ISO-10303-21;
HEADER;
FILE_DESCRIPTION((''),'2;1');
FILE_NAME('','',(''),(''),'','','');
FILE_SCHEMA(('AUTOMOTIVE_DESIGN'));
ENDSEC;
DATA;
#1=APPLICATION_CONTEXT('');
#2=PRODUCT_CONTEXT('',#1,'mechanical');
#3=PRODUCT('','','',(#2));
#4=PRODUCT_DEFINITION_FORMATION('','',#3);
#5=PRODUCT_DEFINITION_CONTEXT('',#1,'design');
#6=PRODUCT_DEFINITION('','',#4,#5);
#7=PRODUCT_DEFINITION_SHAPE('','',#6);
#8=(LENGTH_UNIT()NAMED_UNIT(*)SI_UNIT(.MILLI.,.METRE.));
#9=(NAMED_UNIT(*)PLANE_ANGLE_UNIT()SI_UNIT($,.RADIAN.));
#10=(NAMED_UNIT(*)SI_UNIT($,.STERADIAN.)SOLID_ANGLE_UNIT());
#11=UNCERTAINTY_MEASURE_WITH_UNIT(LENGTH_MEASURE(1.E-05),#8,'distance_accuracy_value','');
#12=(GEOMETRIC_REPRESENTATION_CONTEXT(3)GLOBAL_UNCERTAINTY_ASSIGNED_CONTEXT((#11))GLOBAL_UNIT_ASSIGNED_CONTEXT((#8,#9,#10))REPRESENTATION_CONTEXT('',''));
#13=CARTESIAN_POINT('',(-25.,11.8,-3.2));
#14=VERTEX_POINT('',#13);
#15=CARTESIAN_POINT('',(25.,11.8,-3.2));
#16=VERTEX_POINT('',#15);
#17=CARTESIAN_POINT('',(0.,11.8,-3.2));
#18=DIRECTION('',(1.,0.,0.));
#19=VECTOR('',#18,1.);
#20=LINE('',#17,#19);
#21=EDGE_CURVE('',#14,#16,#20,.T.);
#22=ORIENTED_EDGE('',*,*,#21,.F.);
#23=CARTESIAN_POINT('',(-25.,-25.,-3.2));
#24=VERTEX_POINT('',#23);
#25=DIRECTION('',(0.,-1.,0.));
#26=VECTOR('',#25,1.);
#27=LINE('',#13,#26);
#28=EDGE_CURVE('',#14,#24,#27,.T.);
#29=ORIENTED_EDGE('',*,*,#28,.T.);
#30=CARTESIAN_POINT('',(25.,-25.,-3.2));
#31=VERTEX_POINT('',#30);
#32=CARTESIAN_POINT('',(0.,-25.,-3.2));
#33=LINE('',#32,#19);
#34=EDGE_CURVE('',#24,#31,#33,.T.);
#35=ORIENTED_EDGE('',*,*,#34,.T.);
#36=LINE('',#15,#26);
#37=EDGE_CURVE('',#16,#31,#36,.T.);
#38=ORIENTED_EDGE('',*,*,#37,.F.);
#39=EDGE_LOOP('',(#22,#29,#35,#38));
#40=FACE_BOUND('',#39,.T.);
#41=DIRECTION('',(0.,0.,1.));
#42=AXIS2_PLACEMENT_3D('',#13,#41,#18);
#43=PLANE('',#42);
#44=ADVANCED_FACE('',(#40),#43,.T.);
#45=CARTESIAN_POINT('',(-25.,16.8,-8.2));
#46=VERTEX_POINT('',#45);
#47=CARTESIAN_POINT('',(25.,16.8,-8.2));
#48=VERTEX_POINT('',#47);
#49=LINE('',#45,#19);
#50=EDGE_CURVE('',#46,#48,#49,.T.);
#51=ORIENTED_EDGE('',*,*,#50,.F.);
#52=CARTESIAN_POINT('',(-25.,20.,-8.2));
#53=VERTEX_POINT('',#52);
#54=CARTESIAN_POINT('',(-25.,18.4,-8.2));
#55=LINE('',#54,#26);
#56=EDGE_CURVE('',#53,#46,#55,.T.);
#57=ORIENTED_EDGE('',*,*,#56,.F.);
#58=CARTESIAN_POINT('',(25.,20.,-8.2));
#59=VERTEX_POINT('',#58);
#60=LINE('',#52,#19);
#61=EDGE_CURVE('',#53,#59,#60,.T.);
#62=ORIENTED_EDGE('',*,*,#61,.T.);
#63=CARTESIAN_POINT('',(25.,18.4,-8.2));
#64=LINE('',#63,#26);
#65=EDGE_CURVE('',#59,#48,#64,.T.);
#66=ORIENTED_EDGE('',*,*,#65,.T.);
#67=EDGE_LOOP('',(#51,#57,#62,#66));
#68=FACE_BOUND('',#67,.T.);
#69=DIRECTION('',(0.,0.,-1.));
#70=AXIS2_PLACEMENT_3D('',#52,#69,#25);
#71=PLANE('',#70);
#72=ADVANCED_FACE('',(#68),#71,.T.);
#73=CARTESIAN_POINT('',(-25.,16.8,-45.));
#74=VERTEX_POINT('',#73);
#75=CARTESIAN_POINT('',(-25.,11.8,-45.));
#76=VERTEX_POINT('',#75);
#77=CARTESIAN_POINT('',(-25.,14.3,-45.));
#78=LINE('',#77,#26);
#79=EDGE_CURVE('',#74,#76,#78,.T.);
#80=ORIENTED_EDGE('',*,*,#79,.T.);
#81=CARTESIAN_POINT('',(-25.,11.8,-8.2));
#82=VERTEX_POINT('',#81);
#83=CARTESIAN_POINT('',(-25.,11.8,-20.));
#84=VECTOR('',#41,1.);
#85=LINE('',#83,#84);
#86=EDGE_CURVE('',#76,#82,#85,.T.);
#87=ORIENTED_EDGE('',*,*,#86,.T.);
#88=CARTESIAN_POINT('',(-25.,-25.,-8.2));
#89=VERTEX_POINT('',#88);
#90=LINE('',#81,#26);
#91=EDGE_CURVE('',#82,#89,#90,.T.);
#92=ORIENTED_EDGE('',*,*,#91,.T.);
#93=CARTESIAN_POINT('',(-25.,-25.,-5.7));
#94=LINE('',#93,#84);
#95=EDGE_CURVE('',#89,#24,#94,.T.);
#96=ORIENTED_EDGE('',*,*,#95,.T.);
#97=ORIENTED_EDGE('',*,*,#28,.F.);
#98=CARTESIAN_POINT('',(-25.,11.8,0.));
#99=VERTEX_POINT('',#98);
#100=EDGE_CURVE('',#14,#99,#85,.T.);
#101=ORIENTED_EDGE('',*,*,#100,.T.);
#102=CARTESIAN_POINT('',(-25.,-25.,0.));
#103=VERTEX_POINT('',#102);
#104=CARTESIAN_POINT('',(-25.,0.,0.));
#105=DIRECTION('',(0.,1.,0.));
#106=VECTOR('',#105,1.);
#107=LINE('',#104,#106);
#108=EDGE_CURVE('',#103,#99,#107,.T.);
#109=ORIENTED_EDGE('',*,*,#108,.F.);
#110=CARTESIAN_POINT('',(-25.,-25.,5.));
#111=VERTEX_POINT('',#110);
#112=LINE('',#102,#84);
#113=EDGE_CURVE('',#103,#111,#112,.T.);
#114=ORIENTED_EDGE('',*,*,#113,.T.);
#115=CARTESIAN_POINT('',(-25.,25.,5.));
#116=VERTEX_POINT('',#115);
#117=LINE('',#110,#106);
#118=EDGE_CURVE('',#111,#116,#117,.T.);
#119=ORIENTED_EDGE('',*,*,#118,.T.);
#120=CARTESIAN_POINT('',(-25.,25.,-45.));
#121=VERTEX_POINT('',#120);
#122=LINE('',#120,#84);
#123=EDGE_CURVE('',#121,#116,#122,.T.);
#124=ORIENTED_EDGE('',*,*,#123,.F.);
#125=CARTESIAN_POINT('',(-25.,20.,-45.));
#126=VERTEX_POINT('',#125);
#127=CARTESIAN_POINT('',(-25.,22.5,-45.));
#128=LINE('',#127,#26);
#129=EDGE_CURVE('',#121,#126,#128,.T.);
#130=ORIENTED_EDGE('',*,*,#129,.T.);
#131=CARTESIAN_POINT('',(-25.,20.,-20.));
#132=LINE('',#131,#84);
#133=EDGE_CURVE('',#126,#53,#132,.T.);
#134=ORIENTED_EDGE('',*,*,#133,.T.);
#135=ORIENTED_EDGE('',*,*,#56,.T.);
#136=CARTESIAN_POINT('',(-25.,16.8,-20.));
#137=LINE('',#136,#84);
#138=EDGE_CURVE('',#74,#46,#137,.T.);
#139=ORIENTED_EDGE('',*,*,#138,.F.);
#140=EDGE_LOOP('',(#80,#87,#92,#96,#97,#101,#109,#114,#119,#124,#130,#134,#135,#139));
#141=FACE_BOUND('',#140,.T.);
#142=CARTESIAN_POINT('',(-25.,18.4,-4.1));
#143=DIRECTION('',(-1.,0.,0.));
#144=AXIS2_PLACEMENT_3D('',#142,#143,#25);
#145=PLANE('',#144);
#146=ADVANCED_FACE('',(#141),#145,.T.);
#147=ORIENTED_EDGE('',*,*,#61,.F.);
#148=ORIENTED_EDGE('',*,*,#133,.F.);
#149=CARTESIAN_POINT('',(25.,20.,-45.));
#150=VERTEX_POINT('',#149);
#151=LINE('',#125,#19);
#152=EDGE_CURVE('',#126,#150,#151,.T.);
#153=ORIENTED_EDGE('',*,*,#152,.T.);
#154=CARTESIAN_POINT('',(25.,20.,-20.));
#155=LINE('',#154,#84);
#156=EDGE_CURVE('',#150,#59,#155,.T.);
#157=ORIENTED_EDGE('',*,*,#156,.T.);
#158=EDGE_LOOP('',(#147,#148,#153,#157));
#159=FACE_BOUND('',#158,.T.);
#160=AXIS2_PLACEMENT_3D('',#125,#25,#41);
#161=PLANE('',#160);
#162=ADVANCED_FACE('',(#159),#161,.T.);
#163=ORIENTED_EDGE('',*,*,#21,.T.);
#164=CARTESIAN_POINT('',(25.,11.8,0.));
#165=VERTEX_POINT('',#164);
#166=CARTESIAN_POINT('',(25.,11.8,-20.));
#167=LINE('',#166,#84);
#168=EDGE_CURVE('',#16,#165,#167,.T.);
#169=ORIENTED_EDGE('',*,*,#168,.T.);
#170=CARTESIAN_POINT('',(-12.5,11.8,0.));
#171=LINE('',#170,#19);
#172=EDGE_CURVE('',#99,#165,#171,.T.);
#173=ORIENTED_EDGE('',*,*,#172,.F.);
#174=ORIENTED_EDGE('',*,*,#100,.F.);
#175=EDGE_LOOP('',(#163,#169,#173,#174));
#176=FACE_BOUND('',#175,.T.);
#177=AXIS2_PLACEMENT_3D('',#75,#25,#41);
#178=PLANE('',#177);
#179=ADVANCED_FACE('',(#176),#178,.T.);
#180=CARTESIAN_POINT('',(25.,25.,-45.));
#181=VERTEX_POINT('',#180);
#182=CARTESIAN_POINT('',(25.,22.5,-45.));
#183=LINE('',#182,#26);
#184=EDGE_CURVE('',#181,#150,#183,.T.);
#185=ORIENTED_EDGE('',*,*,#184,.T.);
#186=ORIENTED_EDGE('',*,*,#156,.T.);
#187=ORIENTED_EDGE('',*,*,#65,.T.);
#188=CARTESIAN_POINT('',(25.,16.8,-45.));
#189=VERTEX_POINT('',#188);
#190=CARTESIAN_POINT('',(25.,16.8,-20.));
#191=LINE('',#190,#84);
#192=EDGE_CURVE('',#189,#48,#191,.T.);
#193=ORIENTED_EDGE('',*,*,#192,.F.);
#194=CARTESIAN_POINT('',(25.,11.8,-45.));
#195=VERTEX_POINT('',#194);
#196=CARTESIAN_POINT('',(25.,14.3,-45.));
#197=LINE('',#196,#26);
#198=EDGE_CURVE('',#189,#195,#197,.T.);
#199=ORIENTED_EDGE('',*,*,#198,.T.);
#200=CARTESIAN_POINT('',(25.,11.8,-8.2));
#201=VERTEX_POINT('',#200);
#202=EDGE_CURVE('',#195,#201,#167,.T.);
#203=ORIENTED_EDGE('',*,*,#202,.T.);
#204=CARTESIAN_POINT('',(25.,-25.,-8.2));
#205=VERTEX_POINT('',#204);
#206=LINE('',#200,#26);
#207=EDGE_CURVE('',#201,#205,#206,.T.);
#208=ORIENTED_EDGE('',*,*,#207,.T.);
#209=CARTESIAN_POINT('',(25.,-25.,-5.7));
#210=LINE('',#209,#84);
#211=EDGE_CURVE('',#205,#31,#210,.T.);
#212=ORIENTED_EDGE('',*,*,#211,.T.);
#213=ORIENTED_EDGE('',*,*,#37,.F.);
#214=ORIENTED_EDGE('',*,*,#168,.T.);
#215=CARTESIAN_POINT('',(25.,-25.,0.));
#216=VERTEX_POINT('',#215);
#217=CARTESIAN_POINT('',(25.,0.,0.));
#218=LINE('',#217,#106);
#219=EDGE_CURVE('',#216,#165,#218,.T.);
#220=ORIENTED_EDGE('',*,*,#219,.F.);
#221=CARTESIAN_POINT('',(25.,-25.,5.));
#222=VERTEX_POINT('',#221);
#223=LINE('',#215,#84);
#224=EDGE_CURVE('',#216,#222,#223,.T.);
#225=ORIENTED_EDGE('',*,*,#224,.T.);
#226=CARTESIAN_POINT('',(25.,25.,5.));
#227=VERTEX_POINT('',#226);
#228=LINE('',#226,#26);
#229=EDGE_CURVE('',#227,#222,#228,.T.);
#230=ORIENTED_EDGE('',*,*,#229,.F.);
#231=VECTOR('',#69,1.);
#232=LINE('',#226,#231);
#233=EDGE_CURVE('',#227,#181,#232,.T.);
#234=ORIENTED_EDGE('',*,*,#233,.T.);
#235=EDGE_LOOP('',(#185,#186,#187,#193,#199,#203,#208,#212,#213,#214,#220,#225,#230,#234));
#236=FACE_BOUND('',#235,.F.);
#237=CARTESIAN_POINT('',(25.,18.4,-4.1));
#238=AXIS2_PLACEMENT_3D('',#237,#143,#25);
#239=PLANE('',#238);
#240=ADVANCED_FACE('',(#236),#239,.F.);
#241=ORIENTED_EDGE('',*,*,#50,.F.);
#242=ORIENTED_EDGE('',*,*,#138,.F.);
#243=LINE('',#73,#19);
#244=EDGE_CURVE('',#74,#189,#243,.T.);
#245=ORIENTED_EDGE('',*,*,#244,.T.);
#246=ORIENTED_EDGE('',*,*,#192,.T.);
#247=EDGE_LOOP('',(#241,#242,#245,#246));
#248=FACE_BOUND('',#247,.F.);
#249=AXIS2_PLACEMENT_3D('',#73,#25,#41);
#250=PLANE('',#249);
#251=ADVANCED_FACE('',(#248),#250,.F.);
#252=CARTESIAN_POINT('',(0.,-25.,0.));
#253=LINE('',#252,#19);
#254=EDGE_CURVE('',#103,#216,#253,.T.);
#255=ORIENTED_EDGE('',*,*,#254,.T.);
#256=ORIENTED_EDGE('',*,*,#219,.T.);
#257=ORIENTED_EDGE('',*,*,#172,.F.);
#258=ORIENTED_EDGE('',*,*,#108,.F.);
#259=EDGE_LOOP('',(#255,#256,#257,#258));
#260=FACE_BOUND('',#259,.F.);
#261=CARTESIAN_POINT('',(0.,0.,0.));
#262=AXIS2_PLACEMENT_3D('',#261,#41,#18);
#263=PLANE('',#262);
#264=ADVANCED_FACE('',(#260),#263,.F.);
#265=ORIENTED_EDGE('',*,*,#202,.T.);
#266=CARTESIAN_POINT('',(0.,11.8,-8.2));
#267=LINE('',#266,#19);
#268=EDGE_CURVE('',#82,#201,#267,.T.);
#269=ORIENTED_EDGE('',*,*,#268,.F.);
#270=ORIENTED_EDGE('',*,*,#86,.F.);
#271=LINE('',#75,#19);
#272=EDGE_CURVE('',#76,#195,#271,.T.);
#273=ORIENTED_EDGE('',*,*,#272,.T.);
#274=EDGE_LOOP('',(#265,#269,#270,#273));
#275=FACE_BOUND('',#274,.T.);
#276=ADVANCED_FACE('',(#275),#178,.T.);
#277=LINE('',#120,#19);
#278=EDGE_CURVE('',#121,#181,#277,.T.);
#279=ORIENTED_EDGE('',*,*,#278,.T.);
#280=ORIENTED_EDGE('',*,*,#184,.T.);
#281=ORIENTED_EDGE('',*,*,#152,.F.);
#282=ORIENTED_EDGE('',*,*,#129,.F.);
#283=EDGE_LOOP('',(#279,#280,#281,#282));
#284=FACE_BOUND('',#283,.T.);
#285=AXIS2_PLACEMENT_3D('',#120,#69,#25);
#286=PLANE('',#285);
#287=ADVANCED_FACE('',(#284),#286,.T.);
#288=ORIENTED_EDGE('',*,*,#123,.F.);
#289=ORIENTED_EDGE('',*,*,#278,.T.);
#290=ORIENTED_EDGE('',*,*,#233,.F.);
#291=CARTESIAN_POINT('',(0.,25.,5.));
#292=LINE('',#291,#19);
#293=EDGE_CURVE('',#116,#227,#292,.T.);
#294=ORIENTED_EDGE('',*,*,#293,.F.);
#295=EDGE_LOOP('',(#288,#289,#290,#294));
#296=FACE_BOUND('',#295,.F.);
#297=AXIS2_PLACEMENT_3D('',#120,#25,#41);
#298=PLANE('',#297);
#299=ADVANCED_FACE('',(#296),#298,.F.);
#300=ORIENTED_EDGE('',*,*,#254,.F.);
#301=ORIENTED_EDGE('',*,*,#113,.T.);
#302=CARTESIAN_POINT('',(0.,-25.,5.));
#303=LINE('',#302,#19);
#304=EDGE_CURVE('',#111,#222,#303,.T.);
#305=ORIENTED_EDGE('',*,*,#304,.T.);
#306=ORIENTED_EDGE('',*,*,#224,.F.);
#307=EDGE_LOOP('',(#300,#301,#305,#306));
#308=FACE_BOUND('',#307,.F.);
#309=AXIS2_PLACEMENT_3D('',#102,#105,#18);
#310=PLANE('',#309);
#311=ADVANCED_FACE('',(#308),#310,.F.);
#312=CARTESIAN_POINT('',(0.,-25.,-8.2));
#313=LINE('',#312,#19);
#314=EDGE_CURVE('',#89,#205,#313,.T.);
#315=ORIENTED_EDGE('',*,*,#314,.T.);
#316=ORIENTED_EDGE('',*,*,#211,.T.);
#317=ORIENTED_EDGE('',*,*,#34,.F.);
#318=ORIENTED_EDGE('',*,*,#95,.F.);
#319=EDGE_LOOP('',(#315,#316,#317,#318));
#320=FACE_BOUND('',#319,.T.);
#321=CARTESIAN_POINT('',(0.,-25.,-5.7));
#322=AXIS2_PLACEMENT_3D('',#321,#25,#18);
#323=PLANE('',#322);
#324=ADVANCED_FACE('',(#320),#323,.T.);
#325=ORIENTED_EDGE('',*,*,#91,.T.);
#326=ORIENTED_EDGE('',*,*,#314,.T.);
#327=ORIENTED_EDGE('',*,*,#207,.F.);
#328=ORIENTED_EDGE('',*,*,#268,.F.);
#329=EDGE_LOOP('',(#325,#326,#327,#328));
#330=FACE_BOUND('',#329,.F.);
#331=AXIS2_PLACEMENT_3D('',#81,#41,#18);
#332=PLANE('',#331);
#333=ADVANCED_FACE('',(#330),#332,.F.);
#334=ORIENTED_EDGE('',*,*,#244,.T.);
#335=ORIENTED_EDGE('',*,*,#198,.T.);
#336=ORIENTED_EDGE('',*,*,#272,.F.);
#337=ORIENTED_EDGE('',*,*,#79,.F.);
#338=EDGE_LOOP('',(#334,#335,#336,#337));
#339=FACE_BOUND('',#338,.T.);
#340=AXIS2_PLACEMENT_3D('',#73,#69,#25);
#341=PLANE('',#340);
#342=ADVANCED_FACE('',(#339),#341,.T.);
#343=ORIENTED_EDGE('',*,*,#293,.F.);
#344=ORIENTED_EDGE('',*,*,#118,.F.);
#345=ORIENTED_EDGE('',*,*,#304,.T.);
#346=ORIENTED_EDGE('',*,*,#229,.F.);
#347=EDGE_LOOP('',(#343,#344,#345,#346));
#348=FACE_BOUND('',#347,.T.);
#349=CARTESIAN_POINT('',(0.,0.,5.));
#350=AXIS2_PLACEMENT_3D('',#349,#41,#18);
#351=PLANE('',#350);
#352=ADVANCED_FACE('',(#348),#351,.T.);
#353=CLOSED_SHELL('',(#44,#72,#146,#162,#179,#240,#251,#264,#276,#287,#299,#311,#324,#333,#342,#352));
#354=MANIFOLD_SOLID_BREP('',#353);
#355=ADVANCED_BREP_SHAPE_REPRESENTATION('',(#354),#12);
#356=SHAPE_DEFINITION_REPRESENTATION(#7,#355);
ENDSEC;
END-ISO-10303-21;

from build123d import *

# Parameters (mm, degrees)
F0_W     = 50
F0_H     = 50
F1_DEPTH = 5
F2_W     = 5
F2_H     = 50
F3_DEPTH = 50
F4_W     = 50
F4_H     = 5
F5_DEPTH = 36.8
F6_W     = 3.2
F6_H     = 8.2
F7_DEPTH = 50


# Not quite as in the source:
# - a feature names something its author has since deleted; it is built from what else it names


with BuildPart() as f1:
    # F0 (on Top) → F1 (new body)
    with BuildSketch(Plane.XY):
        Rectangle(F0_W, F0_H)
    extrude(amount=F1_DEPTH)

    # F2 (on face) → F3 (join, through all)
    with BuildSketch(Plane(origin=(-25, 0, 0), x_dir=(0, -1, 0), z_dir=(-1, 0, 0))):
        with Locations((-22.5, -20)):
            Rectangle(F2_W, F2_H)
        with Locations((-14.3, -20)):
            Rectangle(F2_W, F2_H)
    extrude(amount=-F3_DEPTH)

    # F4 (on face) → F5 (join, through all)
    with BuildSketch(Plane.XZ.offset(-11.8)):
        with Locations((0, -5.7)):
            Rectangle(F4_W, F4_H)
    extrude(amount=F5_DEPTH)

    # F6 (on face) → F7 (join, through all)
    with BuildSketch(Plane(origin=(-25, 0, 0), x_dir=(0, -1, 0), z_dir=(-1, 0, 0))):
        with Locations((-18.4, -4.1)):
            Rectangle(F6_W, F6_H)
    extrude(amount=-F7_DEPTH)


solid = f1.part
